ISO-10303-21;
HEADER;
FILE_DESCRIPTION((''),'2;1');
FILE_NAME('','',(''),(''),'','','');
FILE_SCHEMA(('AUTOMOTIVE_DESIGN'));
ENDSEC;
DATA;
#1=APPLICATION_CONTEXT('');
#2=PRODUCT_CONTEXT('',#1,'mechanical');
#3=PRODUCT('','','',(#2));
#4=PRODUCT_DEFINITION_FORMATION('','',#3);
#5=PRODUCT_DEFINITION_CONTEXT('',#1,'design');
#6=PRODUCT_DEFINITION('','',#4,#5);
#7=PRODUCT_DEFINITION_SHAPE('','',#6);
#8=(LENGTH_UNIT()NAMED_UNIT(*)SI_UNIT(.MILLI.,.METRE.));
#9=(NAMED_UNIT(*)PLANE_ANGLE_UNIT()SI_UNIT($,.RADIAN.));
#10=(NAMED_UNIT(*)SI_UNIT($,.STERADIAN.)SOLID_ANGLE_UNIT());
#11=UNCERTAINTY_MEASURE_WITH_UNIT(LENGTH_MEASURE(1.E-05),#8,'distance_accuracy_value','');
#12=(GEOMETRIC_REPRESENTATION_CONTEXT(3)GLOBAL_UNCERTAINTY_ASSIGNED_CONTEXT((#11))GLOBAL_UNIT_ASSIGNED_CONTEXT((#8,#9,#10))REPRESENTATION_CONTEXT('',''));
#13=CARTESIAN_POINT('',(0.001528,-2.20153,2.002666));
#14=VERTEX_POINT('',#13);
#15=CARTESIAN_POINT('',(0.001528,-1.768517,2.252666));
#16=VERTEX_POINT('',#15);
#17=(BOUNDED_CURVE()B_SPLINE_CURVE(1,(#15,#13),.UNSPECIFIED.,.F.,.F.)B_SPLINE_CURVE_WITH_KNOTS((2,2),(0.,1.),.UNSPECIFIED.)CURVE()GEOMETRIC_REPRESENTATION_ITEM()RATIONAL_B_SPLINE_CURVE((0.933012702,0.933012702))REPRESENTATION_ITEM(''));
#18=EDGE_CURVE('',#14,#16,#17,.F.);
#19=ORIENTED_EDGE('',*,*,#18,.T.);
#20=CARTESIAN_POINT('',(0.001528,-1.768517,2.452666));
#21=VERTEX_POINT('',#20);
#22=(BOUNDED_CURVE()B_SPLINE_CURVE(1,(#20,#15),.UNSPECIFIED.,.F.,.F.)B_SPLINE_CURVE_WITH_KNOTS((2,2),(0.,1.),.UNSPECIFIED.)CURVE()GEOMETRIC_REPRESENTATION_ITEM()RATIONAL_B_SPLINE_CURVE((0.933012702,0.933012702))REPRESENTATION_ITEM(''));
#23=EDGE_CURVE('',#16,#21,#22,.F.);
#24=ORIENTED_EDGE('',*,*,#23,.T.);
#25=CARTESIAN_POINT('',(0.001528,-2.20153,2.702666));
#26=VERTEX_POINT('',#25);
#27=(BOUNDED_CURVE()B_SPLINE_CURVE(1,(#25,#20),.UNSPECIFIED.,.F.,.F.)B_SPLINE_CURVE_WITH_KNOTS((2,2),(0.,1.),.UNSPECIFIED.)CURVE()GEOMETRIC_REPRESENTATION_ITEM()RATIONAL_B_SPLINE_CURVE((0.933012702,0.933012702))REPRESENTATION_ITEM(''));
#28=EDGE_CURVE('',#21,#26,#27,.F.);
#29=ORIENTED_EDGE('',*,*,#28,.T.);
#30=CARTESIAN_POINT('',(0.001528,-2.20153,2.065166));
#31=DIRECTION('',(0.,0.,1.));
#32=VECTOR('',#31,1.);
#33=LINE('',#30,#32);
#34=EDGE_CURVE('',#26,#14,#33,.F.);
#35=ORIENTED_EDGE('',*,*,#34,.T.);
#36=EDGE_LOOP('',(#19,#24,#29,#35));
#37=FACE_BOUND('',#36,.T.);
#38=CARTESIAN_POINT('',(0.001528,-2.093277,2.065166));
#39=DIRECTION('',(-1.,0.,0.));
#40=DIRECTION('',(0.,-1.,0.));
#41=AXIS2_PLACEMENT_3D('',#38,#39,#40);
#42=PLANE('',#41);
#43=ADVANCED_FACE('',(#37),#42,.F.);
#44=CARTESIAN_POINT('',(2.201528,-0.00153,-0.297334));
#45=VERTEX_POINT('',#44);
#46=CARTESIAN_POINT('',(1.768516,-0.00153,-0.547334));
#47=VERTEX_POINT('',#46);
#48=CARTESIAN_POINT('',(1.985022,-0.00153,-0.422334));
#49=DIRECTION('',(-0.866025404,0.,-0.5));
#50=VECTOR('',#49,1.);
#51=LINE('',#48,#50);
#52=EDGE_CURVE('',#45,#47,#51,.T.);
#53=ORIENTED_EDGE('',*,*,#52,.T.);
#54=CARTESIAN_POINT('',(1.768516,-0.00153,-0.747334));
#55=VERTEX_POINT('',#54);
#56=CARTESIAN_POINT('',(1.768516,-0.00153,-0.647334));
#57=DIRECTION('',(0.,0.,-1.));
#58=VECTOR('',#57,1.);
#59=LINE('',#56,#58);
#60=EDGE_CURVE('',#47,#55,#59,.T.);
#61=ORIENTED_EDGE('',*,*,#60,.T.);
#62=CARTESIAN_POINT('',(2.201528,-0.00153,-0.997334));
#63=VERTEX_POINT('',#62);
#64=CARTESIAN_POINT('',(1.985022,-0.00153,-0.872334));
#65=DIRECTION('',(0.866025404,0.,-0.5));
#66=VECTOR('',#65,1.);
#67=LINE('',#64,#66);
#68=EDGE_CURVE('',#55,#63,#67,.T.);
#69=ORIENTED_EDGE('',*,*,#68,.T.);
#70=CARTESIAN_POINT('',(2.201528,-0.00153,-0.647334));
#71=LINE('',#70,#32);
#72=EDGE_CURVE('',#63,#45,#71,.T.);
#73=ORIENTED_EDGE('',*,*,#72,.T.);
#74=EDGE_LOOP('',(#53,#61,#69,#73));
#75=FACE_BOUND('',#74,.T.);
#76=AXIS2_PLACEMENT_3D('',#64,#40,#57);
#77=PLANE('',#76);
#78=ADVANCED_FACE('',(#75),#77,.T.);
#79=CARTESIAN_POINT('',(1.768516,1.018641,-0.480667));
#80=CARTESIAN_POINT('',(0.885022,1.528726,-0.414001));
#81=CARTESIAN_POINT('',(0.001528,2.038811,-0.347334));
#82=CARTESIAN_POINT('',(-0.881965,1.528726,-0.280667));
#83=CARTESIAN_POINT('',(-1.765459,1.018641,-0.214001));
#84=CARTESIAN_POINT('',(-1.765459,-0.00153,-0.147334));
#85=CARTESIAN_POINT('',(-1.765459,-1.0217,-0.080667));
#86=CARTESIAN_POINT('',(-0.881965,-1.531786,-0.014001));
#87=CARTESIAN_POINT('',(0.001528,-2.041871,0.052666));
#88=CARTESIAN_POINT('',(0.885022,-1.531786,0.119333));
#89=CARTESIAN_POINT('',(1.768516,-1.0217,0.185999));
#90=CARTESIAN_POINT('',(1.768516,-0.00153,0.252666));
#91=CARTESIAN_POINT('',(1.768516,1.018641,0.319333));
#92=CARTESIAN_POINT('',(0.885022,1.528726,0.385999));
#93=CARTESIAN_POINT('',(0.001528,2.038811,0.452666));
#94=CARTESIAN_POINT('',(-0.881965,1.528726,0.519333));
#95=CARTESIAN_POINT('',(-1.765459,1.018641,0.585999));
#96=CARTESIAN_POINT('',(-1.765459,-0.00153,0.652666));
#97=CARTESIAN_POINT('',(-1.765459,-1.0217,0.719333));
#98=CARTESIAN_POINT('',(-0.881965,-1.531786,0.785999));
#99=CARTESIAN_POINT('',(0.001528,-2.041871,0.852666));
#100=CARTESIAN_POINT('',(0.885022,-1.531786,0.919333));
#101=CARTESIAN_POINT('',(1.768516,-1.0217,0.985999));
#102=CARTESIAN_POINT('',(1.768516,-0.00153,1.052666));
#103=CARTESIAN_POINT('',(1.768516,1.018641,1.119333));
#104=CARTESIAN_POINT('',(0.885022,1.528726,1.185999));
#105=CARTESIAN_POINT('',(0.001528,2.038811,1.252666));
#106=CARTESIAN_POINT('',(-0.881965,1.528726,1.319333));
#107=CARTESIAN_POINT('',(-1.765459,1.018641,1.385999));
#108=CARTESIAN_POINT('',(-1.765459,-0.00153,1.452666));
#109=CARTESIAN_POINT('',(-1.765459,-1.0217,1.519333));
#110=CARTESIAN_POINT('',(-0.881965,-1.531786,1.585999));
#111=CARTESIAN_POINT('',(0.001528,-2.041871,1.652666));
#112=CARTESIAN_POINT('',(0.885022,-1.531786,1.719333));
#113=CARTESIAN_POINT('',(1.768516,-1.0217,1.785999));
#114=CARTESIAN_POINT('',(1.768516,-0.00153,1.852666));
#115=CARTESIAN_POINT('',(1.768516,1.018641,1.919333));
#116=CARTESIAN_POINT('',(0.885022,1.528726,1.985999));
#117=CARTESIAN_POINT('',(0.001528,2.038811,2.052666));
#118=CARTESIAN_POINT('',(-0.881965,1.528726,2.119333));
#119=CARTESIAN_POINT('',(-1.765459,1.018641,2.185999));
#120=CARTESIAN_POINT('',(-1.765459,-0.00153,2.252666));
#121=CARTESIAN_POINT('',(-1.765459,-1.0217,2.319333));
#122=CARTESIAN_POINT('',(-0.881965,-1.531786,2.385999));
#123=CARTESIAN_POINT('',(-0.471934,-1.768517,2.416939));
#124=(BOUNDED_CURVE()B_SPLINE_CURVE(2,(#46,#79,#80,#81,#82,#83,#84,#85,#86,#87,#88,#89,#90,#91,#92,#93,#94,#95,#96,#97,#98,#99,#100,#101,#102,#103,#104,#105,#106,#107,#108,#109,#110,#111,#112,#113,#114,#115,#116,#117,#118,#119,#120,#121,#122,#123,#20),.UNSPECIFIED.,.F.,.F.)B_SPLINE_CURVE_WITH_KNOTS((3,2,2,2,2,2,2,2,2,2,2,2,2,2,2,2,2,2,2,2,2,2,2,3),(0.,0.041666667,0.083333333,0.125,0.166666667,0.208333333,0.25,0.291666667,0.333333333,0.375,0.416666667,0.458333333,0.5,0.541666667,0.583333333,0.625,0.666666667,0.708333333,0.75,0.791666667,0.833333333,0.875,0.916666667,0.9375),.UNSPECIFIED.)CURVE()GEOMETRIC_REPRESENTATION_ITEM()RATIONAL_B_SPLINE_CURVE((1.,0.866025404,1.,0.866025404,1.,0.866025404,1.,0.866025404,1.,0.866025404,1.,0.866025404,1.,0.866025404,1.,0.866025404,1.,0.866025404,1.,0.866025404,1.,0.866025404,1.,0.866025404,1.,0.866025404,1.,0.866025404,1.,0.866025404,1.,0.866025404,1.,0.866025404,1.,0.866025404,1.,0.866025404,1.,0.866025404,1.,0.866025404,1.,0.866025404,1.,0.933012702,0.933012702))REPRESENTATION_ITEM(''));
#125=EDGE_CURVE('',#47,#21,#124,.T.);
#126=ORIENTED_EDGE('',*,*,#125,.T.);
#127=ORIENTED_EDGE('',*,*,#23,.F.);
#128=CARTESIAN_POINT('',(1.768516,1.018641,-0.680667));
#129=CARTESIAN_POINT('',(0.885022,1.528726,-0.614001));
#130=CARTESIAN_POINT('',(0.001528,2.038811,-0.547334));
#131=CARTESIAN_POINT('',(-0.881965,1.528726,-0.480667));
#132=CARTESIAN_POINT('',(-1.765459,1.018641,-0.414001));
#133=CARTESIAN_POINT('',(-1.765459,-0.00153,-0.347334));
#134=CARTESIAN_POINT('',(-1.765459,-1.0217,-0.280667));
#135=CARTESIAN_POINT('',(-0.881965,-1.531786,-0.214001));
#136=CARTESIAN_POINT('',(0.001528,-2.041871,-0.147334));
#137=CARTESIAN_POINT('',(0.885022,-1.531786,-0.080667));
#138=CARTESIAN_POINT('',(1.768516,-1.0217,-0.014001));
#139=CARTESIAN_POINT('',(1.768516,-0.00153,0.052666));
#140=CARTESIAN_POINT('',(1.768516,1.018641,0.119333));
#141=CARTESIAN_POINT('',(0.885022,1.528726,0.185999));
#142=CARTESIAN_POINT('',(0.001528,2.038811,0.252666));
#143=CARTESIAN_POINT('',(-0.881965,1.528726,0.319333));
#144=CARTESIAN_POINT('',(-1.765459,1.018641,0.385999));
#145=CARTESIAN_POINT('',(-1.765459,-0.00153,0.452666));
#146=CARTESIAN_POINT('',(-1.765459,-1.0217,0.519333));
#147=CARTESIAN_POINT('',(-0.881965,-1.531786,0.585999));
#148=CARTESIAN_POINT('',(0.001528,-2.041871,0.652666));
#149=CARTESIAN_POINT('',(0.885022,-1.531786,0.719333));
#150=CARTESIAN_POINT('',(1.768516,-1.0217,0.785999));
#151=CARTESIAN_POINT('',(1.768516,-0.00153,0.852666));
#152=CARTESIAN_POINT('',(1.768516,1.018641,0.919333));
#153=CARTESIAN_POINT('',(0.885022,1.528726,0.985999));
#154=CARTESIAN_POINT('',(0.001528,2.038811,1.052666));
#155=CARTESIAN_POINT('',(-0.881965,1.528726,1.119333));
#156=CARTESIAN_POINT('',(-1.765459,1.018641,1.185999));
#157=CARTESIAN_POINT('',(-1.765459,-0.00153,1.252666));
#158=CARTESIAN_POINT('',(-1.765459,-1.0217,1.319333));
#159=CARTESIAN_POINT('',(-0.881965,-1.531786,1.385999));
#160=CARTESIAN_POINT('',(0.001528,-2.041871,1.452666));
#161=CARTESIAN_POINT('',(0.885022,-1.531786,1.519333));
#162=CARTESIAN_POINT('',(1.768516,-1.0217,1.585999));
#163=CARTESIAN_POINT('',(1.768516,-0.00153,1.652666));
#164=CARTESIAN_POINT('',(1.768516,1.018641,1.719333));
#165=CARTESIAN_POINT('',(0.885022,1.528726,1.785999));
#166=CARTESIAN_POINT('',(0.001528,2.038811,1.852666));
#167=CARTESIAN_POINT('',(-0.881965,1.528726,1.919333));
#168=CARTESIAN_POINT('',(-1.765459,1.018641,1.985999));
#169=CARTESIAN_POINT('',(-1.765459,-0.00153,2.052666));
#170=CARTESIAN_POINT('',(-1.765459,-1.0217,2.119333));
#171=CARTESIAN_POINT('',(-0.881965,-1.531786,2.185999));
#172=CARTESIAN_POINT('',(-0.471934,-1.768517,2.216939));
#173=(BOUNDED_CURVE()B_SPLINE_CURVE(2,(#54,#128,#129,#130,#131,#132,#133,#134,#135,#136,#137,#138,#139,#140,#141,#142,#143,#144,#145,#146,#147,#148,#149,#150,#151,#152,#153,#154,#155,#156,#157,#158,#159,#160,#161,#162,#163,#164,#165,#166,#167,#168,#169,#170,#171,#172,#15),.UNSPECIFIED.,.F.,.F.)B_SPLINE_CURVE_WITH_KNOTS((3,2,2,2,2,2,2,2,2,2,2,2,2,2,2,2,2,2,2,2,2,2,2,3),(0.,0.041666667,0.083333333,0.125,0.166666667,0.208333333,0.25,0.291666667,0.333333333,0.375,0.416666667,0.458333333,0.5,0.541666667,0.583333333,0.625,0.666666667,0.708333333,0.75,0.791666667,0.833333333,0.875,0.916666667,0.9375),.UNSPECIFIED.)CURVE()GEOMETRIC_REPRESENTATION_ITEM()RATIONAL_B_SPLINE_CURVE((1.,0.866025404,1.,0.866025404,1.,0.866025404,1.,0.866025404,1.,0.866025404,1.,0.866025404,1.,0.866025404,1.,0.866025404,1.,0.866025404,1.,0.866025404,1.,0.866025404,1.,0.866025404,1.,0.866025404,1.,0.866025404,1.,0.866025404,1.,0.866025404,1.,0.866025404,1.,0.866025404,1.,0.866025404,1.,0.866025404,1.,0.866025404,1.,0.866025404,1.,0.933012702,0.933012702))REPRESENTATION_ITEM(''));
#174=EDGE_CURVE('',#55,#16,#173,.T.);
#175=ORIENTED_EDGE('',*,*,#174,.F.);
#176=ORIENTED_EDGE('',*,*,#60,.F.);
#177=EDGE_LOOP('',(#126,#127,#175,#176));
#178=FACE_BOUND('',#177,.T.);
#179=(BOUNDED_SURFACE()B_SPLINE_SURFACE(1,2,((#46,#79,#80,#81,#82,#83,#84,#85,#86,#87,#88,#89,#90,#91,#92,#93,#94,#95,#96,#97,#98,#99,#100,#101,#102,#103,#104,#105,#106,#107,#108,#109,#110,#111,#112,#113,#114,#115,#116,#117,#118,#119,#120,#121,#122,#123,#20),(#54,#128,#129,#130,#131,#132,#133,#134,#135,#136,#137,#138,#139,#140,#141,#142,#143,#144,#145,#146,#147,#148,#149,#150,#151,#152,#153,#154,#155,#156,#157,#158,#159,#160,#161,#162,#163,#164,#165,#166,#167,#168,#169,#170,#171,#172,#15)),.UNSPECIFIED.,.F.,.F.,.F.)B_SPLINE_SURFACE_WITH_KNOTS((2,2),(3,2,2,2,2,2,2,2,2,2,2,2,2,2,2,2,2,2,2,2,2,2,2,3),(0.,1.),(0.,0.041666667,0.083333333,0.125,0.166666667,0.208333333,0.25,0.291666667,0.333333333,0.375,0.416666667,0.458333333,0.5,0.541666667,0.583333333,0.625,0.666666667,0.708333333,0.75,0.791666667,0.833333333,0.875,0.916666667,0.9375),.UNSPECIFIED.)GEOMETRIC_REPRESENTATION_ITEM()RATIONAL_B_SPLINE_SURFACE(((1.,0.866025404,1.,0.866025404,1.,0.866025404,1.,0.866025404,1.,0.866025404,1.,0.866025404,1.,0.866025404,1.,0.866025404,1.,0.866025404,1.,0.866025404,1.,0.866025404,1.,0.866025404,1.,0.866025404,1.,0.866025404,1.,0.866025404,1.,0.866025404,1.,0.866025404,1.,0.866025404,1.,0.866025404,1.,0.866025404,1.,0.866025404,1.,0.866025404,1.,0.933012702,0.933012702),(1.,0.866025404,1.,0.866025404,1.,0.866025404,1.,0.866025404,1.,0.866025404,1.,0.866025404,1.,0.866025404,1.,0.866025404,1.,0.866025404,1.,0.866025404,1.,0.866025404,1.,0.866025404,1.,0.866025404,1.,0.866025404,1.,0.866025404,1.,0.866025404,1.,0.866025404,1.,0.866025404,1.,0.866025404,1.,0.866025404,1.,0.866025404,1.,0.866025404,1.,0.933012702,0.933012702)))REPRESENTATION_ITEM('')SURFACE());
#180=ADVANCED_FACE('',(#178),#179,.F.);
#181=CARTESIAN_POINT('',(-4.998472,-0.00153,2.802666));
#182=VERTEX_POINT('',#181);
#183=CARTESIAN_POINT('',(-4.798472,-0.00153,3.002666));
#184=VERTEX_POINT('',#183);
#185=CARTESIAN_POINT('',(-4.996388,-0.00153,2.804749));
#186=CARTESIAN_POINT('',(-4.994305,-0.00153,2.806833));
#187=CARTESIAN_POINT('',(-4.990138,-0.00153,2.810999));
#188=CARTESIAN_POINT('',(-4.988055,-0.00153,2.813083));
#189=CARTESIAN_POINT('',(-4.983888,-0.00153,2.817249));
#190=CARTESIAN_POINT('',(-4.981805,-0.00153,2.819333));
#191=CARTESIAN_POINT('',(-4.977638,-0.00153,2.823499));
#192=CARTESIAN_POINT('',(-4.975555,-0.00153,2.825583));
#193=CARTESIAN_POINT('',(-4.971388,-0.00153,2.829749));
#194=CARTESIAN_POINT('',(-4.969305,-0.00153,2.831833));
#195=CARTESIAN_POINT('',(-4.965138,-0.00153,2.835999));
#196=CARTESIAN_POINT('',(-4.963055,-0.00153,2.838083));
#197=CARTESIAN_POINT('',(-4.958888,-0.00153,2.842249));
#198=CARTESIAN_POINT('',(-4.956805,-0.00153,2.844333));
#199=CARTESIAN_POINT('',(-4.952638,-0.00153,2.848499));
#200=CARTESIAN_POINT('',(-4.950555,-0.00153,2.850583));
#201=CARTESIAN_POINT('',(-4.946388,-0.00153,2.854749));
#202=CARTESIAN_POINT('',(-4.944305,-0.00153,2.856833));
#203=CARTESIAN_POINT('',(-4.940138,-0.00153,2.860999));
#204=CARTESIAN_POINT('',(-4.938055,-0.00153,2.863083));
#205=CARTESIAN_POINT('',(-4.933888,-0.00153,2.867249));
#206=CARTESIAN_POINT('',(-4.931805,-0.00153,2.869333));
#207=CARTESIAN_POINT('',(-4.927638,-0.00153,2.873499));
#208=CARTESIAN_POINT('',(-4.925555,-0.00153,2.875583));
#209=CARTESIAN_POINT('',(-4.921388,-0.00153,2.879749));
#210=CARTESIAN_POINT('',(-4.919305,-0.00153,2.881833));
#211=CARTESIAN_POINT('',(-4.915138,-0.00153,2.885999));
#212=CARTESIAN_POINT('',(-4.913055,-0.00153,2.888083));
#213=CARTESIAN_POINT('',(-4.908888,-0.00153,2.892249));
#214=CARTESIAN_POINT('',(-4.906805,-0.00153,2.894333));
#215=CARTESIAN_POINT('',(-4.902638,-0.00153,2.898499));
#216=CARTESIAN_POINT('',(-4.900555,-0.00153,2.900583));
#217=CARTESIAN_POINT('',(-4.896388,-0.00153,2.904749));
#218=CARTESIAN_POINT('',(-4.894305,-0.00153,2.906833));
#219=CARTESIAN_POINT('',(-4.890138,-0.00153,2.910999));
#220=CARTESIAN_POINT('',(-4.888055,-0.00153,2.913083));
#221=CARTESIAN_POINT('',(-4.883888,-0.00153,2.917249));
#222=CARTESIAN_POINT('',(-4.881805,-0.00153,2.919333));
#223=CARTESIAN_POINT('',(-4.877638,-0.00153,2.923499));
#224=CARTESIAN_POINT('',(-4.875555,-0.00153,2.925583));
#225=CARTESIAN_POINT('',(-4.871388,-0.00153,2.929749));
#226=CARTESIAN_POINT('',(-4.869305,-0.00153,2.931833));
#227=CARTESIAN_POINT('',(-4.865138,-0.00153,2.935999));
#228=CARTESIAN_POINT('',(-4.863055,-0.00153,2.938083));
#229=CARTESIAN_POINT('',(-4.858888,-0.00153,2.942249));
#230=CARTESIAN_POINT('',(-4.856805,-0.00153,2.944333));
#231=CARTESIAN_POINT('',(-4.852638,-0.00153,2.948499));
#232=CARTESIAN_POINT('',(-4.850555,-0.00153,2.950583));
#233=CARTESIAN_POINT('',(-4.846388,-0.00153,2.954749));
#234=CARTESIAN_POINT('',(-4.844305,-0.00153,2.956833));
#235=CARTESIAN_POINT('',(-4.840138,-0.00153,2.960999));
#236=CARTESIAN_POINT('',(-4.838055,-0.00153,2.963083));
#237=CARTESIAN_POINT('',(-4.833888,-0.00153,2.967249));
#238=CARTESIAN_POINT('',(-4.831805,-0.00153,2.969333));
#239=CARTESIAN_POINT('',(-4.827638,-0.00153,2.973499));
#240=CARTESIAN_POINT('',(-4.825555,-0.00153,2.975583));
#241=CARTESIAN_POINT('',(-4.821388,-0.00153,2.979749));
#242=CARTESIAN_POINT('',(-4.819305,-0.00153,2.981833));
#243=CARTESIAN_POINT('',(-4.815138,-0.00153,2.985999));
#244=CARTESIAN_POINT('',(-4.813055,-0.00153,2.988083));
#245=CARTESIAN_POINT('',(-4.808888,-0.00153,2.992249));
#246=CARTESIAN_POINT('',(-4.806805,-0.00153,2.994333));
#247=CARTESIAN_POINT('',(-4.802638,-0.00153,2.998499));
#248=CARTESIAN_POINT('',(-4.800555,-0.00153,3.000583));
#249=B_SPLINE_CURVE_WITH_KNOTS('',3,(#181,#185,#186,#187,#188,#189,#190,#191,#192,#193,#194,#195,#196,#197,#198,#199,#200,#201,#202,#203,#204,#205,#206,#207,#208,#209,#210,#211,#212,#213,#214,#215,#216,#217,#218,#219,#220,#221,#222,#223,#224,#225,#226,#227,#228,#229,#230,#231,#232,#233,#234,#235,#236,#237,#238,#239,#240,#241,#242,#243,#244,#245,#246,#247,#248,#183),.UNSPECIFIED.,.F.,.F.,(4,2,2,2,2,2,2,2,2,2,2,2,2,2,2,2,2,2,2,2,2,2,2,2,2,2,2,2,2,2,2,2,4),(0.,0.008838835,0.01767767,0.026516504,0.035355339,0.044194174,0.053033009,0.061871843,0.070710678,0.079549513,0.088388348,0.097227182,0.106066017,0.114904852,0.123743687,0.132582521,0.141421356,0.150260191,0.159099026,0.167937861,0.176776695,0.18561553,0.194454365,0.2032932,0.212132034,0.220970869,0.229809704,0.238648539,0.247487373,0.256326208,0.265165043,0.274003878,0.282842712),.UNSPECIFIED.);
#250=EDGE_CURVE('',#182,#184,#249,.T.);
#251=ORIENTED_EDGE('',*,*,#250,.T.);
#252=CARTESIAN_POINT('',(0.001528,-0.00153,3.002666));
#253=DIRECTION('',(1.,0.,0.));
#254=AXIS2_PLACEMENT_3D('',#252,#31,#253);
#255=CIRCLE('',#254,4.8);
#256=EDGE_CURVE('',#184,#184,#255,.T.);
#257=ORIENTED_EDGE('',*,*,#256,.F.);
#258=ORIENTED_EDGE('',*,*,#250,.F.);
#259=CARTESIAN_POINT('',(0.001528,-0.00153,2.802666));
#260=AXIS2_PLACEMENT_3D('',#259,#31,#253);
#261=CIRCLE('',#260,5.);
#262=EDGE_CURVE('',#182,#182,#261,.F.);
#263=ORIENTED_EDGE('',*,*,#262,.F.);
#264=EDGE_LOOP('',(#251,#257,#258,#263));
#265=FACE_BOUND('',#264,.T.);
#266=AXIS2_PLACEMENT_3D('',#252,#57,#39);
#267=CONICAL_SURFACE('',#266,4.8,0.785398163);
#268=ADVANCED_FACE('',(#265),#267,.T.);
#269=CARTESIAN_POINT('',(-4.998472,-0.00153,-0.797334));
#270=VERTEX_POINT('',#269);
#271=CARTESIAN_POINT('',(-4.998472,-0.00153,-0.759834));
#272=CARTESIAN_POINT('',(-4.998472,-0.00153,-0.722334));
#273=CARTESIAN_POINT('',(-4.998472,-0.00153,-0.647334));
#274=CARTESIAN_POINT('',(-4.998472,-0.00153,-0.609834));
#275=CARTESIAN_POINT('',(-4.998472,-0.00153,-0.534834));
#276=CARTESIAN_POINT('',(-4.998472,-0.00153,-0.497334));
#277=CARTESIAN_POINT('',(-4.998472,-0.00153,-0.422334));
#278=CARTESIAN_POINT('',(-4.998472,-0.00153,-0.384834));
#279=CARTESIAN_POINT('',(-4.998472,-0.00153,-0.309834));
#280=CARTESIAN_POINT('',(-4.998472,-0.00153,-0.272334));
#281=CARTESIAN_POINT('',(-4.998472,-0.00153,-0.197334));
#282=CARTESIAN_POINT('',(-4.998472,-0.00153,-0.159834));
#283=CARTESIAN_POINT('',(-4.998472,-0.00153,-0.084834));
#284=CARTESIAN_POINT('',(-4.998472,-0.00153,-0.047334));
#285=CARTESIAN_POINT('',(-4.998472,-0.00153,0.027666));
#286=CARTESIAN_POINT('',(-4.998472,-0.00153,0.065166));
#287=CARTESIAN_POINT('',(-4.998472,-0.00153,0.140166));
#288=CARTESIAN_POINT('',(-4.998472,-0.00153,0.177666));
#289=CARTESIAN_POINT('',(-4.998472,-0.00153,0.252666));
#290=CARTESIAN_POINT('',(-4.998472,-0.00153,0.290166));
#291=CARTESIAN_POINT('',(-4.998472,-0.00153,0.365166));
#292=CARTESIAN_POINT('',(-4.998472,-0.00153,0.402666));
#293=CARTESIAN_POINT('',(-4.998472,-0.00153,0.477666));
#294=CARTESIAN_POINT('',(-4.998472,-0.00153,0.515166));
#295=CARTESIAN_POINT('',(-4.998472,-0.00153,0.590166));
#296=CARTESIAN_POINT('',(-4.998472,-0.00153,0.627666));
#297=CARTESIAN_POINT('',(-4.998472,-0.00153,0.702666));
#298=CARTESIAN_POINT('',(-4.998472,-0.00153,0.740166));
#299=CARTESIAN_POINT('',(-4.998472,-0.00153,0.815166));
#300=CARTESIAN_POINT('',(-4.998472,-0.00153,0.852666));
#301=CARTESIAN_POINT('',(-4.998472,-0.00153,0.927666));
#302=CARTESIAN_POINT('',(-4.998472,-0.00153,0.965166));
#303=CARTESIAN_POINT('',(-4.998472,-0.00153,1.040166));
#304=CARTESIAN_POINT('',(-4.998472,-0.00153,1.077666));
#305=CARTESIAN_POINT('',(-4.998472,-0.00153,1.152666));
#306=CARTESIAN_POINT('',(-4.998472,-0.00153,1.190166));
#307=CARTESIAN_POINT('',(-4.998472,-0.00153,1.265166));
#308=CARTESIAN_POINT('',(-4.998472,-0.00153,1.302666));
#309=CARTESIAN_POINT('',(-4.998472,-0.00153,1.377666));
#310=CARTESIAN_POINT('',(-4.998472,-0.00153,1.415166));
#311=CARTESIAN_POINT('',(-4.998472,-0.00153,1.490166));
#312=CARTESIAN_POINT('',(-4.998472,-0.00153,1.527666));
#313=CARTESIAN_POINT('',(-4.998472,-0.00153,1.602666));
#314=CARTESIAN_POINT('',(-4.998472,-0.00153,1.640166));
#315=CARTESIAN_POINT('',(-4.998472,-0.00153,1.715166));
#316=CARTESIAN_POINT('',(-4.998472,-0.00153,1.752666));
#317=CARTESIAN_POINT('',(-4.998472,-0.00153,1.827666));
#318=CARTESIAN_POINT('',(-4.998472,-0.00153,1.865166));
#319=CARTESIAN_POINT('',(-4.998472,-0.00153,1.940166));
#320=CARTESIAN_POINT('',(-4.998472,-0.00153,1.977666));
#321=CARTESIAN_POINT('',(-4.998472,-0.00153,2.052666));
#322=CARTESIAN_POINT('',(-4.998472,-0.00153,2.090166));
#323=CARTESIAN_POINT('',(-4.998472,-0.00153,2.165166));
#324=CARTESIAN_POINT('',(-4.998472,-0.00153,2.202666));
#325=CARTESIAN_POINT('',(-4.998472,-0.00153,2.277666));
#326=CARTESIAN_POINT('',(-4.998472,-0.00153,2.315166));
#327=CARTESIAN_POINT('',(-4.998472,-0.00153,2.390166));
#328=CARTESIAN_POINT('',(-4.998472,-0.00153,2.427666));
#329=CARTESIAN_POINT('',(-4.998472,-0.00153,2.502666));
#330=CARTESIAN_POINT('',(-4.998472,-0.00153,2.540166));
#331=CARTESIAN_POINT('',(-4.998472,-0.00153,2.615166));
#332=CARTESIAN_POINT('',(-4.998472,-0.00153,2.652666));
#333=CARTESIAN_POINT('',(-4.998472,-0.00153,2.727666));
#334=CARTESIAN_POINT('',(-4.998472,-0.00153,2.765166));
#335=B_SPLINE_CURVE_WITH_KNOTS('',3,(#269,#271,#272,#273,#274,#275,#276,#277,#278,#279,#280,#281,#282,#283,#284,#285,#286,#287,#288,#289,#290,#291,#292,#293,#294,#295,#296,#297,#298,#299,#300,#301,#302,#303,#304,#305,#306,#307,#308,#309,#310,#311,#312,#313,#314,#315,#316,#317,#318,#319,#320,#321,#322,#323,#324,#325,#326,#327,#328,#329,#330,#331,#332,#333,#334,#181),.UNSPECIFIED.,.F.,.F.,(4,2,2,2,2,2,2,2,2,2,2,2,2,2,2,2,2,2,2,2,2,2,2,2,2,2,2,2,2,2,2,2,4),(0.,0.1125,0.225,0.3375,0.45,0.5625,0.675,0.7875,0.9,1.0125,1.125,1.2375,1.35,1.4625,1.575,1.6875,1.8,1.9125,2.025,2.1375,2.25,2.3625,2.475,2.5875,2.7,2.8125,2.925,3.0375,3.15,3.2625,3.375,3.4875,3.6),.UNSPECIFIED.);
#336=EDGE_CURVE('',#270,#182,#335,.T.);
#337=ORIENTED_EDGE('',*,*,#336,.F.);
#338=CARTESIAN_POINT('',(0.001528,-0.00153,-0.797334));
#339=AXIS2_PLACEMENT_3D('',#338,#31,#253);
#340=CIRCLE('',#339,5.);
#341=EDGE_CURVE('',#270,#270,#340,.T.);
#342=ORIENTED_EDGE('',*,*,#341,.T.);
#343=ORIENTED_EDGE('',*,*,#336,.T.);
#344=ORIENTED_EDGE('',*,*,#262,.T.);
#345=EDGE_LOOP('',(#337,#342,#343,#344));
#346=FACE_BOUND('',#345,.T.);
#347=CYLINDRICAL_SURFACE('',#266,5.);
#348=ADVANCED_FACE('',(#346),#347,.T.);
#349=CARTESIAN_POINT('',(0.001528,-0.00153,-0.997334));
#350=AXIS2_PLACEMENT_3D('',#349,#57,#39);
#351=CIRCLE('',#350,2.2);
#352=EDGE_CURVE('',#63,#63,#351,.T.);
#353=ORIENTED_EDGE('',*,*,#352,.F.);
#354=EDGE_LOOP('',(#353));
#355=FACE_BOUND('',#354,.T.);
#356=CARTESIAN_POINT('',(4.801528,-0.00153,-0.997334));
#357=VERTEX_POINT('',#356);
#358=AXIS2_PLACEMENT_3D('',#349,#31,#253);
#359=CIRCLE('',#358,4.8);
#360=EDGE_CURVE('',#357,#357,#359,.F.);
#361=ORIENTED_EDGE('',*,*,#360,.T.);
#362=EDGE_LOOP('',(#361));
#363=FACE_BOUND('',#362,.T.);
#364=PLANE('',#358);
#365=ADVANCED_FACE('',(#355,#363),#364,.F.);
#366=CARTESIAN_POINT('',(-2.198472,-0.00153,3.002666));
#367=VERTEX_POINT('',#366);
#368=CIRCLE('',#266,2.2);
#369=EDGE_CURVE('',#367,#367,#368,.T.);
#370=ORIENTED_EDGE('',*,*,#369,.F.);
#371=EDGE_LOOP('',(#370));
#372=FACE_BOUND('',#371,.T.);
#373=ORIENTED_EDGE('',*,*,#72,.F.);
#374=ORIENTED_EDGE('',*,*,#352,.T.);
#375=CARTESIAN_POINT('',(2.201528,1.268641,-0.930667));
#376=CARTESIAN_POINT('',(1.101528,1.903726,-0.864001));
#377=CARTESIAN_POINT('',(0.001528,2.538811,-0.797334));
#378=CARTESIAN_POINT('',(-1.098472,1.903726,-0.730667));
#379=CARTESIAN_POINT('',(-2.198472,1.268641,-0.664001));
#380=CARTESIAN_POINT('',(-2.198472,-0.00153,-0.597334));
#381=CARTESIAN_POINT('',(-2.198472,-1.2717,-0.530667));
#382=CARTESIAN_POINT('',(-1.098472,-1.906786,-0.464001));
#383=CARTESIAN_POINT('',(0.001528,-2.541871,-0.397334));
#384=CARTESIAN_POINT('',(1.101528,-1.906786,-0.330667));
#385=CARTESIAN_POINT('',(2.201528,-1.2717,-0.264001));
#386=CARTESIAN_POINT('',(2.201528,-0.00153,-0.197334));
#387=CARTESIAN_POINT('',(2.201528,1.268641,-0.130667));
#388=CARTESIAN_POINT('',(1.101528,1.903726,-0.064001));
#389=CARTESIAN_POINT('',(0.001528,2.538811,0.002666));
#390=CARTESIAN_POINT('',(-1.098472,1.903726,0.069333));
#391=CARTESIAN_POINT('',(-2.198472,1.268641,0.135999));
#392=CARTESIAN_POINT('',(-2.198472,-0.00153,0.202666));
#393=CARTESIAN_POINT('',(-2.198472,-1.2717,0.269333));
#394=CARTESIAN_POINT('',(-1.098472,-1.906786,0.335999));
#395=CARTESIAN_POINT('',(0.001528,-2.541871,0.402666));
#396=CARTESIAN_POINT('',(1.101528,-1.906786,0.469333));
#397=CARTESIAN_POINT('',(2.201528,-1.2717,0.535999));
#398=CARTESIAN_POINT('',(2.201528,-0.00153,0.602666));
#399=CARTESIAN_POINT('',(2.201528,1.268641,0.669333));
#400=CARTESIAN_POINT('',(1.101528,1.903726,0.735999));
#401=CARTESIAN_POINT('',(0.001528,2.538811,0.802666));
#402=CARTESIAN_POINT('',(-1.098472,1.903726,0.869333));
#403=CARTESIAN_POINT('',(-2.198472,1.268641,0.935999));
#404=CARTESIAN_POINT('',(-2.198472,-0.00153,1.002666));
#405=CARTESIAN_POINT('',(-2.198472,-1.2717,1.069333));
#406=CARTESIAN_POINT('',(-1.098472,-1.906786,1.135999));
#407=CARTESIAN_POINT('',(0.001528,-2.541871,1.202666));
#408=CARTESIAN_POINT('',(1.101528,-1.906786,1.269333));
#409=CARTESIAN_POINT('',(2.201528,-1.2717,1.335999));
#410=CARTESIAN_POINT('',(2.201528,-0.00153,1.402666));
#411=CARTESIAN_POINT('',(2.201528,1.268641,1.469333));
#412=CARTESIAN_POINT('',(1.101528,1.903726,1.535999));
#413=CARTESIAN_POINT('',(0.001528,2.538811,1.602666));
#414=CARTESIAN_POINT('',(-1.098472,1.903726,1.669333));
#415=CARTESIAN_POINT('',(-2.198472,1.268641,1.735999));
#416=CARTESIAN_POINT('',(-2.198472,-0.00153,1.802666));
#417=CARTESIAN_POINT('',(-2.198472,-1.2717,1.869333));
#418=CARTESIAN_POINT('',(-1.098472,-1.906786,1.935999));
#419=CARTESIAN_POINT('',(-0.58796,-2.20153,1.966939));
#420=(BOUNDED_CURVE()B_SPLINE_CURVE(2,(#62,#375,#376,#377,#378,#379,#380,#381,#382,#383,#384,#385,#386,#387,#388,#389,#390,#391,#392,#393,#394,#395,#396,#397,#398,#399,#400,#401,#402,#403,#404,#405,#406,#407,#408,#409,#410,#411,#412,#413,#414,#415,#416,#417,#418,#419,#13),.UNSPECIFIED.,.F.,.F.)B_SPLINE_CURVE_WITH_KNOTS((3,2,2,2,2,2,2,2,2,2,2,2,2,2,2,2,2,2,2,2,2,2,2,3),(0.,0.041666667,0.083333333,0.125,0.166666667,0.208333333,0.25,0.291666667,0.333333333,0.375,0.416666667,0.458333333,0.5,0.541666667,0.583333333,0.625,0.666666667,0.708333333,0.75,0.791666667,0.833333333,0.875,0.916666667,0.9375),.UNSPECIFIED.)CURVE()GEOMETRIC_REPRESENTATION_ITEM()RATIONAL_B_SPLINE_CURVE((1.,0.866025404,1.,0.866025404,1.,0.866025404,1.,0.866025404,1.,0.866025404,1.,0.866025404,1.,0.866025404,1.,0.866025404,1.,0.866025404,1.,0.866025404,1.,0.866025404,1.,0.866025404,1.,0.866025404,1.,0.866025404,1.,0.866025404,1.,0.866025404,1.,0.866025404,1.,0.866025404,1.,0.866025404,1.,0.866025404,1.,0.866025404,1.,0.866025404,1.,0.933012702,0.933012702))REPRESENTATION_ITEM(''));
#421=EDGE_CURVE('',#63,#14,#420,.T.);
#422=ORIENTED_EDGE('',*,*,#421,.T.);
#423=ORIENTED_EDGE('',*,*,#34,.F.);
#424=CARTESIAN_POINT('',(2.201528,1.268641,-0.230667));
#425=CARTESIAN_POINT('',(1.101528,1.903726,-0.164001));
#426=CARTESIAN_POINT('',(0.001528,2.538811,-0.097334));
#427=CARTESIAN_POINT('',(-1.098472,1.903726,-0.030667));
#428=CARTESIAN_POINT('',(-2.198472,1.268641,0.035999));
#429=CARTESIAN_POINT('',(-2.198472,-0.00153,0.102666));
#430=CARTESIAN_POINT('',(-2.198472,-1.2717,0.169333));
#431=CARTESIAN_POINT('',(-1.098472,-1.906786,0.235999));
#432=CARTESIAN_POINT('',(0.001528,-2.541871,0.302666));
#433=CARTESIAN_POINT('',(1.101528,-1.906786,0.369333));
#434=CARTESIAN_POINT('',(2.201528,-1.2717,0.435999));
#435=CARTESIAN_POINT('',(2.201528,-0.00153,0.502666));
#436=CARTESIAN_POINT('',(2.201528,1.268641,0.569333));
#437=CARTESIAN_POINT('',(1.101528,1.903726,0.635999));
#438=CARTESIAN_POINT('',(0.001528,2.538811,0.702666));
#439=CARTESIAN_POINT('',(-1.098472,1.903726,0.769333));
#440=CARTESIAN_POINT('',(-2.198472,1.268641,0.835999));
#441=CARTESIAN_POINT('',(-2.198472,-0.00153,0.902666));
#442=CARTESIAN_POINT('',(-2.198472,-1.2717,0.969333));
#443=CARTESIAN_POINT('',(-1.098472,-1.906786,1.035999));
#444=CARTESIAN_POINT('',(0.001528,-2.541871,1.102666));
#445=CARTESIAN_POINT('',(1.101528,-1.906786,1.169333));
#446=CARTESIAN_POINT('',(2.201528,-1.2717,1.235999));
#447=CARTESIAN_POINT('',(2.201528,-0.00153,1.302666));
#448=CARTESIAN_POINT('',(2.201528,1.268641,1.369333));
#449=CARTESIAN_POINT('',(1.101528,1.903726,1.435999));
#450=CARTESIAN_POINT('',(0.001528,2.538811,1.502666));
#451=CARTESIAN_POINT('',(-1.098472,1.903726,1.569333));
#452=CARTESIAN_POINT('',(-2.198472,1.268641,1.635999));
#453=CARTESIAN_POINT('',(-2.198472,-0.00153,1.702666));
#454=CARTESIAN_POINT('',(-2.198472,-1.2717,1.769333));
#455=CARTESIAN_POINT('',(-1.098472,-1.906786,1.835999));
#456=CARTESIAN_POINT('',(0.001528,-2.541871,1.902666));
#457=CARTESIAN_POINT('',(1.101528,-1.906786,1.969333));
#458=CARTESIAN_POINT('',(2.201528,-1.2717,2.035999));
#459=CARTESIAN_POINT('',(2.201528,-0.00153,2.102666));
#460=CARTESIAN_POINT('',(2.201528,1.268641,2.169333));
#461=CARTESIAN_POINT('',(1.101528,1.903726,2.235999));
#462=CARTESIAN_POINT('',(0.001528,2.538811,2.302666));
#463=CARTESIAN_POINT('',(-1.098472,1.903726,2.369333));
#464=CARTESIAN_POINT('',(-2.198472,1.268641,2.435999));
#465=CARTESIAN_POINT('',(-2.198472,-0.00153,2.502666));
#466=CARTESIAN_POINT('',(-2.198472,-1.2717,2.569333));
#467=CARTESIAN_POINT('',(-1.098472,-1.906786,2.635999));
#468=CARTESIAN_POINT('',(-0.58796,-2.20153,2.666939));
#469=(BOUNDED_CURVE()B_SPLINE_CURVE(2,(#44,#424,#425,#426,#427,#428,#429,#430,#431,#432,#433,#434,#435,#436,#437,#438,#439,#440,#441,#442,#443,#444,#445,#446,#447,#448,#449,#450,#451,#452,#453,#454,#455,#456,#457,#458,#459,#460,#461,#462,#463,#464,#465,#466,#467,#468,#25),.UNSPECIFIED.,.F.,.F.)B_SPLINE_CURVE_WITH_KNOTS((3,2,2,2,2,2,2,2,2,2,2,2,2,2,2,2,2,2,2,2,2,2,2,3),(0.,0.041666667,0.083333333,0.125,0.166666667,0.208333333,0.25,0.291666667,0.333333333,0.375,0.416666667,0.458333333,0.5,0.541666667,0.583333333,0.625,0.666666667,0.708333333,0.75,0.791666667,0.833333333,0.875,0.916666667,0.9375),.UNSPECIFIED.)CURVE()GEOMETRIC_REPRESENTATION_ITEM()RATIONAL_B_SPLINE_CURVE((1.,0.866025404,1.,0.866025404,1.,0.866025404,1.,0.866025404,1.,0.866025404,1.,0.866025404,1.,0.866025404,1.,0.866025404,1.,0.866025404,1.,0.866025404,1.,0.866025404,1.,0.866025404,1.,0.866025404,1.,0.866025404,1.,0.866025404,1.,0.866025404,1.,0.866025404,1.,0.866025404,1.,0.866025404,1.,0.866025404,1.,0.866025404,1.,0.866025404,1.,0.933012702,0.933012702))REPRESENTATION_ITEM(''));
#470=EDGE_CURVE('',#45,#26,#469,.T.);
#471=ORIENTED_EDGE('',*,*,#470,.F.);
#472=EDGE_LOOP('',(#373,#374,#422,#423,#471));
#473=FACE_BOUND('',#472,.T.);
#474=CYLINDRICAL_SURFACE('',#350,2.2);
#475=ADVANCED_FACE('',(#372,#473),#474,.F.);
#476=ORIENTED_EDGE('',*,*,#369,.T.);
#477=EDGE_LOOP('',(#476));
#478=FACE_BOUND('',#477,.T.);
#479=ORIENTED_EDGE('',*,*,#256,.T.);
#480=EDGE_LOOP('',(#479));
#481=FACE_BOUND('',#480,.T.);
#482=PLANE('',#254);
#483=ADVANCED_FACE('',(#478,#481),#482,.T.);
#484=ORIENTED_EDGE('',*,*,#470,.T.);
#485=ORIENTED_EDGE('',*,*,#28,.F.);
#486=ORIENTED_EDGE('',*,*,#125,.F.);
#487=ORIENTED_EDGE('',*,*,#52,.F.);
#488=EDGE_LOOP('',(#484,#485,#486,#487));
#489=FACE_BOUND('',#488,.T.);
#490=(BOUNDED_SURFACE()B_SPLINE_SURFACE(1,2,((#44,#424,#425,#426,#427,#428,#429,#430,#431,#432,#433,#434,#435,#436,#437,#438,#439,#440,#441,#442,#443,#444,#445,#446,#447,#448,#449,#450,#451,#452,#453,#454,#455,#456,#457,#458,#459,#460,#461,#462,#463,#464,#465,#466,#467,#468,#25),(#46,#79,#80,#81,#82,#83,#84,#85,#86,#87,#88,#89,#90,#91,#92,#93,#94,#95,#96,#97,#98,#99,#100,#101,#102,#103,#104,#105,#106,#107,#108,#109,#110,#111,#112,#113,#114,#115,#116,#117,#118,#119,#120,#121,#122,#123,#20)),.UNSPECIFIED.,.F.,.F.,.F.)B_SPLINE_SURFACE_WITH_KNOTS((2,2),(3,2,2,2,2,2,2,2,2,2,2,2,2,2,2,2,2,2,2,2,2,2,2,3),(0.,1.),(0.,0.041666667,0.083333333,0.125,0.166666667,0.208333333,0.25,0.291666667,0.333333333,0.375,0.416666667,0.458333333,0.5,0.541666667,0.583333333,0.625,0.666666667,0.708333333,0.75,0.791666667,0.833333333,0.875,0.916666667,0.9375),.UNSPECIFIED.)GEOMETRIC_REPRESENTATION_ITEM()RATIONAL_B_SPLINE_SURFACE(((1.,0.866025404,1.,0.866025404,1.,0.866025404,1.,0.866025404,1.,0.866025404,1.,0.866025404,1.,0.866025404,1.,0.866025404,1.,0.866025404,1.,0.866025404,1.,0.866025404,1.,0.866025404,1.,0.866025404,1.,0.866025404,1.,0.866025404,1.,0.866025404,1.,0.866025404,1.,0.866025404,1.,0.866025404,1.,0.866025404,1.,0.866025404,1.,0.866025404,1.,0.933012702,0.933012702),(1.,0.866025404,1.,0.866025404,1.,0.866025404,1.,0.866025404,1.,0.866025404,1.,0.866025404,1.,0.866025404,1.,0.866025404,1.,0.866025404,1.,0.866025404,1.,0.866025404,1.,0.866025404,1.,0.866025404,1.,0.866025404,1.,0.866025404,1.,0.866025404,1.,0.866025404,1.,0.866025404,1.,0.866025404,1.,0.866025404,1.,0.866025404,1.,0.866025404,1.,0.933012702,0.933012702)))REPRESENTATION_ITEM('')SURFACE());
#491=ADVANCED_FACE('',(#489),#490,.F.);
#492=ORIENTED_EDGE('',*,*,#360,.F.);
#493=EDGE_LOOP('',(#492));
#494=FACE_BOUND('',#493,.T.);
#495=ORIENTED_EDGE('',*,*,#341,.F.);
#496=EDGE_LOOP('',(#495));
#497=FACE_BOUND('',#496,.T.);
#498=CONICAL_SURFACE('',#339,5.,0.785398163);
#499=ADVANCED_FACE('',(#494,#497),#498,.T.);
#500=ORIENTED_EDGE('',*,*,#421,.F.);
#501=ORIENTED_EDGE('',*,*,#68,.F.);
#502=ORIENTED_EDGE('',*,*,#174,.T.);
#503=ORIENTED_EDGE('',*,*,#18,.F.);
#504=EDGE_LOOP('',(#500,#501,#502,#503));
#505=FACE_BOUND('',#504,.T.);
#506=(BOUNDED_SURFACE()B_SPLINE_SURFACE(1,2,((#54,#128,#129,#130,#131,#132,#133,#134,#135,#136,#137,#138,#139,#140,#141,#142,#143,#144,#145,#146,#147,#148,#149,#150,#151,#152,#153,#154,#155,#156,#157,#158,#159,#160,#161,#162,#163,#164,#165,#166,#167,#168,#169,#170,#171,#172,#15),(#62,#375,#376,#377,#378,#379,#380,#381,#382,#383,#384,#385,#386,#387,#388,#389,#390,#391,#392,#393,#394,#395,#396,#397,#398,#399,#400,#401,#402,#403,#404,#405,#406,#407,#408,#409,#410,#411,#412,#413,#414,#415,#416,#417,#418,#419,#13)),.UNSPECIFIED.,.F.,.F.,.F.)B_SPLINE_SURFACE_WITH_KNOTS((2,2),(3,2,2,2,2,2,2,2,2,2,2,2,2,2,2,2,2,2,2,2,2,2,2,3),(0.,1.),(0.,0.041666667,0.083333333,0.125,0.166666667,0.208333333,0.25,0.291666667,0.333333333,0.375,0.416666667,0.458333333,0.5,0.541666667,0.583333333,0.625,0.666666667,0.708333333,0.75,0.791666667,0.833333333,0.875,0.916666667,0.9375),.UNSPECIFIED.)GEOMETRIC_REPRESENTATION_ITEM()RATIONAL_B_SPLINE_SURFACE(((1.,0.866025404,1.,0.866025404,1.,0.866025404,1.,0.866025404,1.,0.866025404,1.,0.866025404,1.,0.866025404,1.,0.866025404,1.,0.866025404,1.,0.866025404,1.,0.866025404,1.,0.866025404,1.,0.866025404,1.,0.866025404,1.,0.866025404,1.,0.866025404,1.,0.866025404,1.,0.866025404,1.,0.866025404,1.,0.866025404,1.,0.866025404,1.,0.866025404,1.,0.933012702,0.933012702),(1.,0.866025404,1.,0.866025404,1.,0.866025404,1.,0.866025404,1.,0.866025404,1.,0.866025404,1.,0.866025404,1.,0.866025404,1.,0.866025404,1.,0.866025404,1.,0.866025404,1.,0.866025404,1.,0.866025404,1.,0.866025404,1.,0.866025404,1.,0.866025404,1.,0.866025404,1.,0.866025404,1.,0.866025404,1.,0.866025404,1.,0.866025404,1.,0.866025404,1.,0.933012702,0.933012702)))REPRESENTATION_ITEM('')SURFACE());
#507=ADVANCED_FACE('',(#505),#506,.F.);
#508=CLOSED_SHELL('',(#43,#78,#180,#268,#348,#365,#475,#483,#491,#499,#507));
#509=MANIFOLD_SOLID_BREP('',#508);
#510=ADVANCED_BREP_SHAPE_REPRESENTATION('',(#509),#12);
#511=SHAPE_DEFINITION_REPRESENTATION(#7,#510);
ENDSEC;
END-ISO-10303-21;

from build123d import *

# Parameters (mm, degrees)
SKETCH_1_R        = 2.5
EXTRUDE_1_DEPTH   = 2
CHAMFER_2_SIZE    = 0.1
HOLE_WIZARD_M21_D = 2.2
THREAD_1_PITCH    = 0.4
SCALE_1_SCALE     = 2


with BuildPart() as part:
    # Sketch 1 → Бобышка-Вытянуть1 (new body)
    with BuildSketch(Plane.XY):
        Circle(SKETCH_1_R)
    extrude(amount=EXTRUDE_1_DEPTH)

    # Фаска2
    chamfer_2_edges = [part.edges().sort_by_distance(p)[0] for p in [
        (-2.5, 0, 0),
        (-2.5, 0, 2),
    ]]
    chamfer(chamfer_2_edges, length=CHAMFER_2_SIZE)

    # Отверстие с зазором M21 (through all)
    with Locations(Plane(origin=(0, 0, 0), x_dir=(-1, 0, 0), z_dir=(0, 0, -1))):
        with Locations((0, 0)):
            Hole(HOLE_WIZARD_M21_D / 2)

    # Резьба1: the profile of Sketch 1 2 profile screwed along a right-hand helix of 3.75 turns, 6 arcs to a turn; built about Z, then put on its axis
    thread_1_z = Axis((0, 0, 0), (0, 0, 1))
    thread_1_corners = [(1.1003, 0, -0.000173205), (1.1003, 0, 0.350173204), (0.88349365, 0, 0.224999999), (0.88349365, 0, 0.124999999)]
    with BuildLine(mode=Mode.PRIVATE) as thread_1_profile:
        Line(thread_1_corners[0], thread_1_corners[1])
        Line(thread_1_corners[1], thread_1_corners[2])
        Line(thread_1_corners[2], thread_1_corners[3])
        Line(thread_1_corners[3], thread_1_corners[0])
    thread_1_cap = Face(thread_1_profile.wire())
    thread_1_turn_angles = [0, 30, 60, 90, 120, 150, 180, 210, 240, 270, 300, 330, 360]
    thread_1_turn_weights = [1, 0.8660254037844387, 1, 0.8660254037844387, 1, 0.8660254037844387, 1, 0.8660254037844387, 1, 0.8660254037844387, 1, 0.8660254037844387, 1]
    thread_1_turn_rails = [Edge.make_bspline([Vector(p[0], p[1], 0).rotate(thread_1_z, thread_1_turn_angles[k]) / thread_1_turn_weights[k] + Vector(0, 0, p[2] + THREAD_1_PITCH * thread_1_turn_angles[k] / 360) for k in range(13)], [0, 0, 0, 1, 1, 2, 2, 3, 3, 4, 4, 5, 5, 6, 6, 6], 2, thread_1_turn_weights) for p in thread_1_corners]
    thread_1_turn_sides = [Face.make_surface_from_curves(thread_1_turn_rails[p[0]], thread_1_turn_rails[p[1]]) for p in [(0, 1), (1, 2), (2, 3), (3, 0)]]
    thread_1_last_angles = [1080, 1110, 1140, 1170, 1200, 1230, 1260, 1290, 1320, 1335, 1350]
    thread_1_last_weights = [1, 0.8660254037844387, 1, 0.8660254037844387, 1, 0.8660254037844387, 1, 0.8660254037844387, 1, 0.9659258262890683, 1]
    thread_1_last_rails = [Edge.make_bspline([Vector(p[0], p[1], 0).rotate(thread_1_z, thread_1_last_angles[k]) / thread_1_last_weights[k] + Vector(0, 0, p[2] + THREAD_1_PITCH * thread_1_last_angles[k] / 360) for k in range(11)], [0, 0, 0, 1, 1, 2, 2, 3, 3, 4, 4, 5, 5, 5], 2, thread_1_last_weights) for p in thread_1_corners]
    thread_1_last_sides = [Face.make_surface_from_curves(thread_1_last_rails[p[0]], thread_1_last_rails[p[1]]) for p in [(0, 1), (1, 2), (2, 3), (3, 0)]]
    thread_1 = Plane(origin=(0, 0, 0), x_dir=(1, 0, 0), z_dir=(0, 0, 1)) * Solid(Shell([*[p.moved(Location((0, 0, THREAD_1_PITCH * i))) for i in range(3) for p in thread_1_turn_sides], *thread_1_last_sides, thread_1_cap, thread_1_cap.rotate(thread_1_z, 1350).moved(Location((0, 0, THREAD_1_PITCH * 1350 / 360)))]))
    add(thread_1)


with BuildPart() as part_1:
    # Масштаб1: scaled about (-0.001502253, 0.001928921, 0.997553273)
    add(part.part.scale(SCALE_1_SCALE).moved(Location((0.001502253, -0.001928921, -0.997553273))))


solid = part_1.part
